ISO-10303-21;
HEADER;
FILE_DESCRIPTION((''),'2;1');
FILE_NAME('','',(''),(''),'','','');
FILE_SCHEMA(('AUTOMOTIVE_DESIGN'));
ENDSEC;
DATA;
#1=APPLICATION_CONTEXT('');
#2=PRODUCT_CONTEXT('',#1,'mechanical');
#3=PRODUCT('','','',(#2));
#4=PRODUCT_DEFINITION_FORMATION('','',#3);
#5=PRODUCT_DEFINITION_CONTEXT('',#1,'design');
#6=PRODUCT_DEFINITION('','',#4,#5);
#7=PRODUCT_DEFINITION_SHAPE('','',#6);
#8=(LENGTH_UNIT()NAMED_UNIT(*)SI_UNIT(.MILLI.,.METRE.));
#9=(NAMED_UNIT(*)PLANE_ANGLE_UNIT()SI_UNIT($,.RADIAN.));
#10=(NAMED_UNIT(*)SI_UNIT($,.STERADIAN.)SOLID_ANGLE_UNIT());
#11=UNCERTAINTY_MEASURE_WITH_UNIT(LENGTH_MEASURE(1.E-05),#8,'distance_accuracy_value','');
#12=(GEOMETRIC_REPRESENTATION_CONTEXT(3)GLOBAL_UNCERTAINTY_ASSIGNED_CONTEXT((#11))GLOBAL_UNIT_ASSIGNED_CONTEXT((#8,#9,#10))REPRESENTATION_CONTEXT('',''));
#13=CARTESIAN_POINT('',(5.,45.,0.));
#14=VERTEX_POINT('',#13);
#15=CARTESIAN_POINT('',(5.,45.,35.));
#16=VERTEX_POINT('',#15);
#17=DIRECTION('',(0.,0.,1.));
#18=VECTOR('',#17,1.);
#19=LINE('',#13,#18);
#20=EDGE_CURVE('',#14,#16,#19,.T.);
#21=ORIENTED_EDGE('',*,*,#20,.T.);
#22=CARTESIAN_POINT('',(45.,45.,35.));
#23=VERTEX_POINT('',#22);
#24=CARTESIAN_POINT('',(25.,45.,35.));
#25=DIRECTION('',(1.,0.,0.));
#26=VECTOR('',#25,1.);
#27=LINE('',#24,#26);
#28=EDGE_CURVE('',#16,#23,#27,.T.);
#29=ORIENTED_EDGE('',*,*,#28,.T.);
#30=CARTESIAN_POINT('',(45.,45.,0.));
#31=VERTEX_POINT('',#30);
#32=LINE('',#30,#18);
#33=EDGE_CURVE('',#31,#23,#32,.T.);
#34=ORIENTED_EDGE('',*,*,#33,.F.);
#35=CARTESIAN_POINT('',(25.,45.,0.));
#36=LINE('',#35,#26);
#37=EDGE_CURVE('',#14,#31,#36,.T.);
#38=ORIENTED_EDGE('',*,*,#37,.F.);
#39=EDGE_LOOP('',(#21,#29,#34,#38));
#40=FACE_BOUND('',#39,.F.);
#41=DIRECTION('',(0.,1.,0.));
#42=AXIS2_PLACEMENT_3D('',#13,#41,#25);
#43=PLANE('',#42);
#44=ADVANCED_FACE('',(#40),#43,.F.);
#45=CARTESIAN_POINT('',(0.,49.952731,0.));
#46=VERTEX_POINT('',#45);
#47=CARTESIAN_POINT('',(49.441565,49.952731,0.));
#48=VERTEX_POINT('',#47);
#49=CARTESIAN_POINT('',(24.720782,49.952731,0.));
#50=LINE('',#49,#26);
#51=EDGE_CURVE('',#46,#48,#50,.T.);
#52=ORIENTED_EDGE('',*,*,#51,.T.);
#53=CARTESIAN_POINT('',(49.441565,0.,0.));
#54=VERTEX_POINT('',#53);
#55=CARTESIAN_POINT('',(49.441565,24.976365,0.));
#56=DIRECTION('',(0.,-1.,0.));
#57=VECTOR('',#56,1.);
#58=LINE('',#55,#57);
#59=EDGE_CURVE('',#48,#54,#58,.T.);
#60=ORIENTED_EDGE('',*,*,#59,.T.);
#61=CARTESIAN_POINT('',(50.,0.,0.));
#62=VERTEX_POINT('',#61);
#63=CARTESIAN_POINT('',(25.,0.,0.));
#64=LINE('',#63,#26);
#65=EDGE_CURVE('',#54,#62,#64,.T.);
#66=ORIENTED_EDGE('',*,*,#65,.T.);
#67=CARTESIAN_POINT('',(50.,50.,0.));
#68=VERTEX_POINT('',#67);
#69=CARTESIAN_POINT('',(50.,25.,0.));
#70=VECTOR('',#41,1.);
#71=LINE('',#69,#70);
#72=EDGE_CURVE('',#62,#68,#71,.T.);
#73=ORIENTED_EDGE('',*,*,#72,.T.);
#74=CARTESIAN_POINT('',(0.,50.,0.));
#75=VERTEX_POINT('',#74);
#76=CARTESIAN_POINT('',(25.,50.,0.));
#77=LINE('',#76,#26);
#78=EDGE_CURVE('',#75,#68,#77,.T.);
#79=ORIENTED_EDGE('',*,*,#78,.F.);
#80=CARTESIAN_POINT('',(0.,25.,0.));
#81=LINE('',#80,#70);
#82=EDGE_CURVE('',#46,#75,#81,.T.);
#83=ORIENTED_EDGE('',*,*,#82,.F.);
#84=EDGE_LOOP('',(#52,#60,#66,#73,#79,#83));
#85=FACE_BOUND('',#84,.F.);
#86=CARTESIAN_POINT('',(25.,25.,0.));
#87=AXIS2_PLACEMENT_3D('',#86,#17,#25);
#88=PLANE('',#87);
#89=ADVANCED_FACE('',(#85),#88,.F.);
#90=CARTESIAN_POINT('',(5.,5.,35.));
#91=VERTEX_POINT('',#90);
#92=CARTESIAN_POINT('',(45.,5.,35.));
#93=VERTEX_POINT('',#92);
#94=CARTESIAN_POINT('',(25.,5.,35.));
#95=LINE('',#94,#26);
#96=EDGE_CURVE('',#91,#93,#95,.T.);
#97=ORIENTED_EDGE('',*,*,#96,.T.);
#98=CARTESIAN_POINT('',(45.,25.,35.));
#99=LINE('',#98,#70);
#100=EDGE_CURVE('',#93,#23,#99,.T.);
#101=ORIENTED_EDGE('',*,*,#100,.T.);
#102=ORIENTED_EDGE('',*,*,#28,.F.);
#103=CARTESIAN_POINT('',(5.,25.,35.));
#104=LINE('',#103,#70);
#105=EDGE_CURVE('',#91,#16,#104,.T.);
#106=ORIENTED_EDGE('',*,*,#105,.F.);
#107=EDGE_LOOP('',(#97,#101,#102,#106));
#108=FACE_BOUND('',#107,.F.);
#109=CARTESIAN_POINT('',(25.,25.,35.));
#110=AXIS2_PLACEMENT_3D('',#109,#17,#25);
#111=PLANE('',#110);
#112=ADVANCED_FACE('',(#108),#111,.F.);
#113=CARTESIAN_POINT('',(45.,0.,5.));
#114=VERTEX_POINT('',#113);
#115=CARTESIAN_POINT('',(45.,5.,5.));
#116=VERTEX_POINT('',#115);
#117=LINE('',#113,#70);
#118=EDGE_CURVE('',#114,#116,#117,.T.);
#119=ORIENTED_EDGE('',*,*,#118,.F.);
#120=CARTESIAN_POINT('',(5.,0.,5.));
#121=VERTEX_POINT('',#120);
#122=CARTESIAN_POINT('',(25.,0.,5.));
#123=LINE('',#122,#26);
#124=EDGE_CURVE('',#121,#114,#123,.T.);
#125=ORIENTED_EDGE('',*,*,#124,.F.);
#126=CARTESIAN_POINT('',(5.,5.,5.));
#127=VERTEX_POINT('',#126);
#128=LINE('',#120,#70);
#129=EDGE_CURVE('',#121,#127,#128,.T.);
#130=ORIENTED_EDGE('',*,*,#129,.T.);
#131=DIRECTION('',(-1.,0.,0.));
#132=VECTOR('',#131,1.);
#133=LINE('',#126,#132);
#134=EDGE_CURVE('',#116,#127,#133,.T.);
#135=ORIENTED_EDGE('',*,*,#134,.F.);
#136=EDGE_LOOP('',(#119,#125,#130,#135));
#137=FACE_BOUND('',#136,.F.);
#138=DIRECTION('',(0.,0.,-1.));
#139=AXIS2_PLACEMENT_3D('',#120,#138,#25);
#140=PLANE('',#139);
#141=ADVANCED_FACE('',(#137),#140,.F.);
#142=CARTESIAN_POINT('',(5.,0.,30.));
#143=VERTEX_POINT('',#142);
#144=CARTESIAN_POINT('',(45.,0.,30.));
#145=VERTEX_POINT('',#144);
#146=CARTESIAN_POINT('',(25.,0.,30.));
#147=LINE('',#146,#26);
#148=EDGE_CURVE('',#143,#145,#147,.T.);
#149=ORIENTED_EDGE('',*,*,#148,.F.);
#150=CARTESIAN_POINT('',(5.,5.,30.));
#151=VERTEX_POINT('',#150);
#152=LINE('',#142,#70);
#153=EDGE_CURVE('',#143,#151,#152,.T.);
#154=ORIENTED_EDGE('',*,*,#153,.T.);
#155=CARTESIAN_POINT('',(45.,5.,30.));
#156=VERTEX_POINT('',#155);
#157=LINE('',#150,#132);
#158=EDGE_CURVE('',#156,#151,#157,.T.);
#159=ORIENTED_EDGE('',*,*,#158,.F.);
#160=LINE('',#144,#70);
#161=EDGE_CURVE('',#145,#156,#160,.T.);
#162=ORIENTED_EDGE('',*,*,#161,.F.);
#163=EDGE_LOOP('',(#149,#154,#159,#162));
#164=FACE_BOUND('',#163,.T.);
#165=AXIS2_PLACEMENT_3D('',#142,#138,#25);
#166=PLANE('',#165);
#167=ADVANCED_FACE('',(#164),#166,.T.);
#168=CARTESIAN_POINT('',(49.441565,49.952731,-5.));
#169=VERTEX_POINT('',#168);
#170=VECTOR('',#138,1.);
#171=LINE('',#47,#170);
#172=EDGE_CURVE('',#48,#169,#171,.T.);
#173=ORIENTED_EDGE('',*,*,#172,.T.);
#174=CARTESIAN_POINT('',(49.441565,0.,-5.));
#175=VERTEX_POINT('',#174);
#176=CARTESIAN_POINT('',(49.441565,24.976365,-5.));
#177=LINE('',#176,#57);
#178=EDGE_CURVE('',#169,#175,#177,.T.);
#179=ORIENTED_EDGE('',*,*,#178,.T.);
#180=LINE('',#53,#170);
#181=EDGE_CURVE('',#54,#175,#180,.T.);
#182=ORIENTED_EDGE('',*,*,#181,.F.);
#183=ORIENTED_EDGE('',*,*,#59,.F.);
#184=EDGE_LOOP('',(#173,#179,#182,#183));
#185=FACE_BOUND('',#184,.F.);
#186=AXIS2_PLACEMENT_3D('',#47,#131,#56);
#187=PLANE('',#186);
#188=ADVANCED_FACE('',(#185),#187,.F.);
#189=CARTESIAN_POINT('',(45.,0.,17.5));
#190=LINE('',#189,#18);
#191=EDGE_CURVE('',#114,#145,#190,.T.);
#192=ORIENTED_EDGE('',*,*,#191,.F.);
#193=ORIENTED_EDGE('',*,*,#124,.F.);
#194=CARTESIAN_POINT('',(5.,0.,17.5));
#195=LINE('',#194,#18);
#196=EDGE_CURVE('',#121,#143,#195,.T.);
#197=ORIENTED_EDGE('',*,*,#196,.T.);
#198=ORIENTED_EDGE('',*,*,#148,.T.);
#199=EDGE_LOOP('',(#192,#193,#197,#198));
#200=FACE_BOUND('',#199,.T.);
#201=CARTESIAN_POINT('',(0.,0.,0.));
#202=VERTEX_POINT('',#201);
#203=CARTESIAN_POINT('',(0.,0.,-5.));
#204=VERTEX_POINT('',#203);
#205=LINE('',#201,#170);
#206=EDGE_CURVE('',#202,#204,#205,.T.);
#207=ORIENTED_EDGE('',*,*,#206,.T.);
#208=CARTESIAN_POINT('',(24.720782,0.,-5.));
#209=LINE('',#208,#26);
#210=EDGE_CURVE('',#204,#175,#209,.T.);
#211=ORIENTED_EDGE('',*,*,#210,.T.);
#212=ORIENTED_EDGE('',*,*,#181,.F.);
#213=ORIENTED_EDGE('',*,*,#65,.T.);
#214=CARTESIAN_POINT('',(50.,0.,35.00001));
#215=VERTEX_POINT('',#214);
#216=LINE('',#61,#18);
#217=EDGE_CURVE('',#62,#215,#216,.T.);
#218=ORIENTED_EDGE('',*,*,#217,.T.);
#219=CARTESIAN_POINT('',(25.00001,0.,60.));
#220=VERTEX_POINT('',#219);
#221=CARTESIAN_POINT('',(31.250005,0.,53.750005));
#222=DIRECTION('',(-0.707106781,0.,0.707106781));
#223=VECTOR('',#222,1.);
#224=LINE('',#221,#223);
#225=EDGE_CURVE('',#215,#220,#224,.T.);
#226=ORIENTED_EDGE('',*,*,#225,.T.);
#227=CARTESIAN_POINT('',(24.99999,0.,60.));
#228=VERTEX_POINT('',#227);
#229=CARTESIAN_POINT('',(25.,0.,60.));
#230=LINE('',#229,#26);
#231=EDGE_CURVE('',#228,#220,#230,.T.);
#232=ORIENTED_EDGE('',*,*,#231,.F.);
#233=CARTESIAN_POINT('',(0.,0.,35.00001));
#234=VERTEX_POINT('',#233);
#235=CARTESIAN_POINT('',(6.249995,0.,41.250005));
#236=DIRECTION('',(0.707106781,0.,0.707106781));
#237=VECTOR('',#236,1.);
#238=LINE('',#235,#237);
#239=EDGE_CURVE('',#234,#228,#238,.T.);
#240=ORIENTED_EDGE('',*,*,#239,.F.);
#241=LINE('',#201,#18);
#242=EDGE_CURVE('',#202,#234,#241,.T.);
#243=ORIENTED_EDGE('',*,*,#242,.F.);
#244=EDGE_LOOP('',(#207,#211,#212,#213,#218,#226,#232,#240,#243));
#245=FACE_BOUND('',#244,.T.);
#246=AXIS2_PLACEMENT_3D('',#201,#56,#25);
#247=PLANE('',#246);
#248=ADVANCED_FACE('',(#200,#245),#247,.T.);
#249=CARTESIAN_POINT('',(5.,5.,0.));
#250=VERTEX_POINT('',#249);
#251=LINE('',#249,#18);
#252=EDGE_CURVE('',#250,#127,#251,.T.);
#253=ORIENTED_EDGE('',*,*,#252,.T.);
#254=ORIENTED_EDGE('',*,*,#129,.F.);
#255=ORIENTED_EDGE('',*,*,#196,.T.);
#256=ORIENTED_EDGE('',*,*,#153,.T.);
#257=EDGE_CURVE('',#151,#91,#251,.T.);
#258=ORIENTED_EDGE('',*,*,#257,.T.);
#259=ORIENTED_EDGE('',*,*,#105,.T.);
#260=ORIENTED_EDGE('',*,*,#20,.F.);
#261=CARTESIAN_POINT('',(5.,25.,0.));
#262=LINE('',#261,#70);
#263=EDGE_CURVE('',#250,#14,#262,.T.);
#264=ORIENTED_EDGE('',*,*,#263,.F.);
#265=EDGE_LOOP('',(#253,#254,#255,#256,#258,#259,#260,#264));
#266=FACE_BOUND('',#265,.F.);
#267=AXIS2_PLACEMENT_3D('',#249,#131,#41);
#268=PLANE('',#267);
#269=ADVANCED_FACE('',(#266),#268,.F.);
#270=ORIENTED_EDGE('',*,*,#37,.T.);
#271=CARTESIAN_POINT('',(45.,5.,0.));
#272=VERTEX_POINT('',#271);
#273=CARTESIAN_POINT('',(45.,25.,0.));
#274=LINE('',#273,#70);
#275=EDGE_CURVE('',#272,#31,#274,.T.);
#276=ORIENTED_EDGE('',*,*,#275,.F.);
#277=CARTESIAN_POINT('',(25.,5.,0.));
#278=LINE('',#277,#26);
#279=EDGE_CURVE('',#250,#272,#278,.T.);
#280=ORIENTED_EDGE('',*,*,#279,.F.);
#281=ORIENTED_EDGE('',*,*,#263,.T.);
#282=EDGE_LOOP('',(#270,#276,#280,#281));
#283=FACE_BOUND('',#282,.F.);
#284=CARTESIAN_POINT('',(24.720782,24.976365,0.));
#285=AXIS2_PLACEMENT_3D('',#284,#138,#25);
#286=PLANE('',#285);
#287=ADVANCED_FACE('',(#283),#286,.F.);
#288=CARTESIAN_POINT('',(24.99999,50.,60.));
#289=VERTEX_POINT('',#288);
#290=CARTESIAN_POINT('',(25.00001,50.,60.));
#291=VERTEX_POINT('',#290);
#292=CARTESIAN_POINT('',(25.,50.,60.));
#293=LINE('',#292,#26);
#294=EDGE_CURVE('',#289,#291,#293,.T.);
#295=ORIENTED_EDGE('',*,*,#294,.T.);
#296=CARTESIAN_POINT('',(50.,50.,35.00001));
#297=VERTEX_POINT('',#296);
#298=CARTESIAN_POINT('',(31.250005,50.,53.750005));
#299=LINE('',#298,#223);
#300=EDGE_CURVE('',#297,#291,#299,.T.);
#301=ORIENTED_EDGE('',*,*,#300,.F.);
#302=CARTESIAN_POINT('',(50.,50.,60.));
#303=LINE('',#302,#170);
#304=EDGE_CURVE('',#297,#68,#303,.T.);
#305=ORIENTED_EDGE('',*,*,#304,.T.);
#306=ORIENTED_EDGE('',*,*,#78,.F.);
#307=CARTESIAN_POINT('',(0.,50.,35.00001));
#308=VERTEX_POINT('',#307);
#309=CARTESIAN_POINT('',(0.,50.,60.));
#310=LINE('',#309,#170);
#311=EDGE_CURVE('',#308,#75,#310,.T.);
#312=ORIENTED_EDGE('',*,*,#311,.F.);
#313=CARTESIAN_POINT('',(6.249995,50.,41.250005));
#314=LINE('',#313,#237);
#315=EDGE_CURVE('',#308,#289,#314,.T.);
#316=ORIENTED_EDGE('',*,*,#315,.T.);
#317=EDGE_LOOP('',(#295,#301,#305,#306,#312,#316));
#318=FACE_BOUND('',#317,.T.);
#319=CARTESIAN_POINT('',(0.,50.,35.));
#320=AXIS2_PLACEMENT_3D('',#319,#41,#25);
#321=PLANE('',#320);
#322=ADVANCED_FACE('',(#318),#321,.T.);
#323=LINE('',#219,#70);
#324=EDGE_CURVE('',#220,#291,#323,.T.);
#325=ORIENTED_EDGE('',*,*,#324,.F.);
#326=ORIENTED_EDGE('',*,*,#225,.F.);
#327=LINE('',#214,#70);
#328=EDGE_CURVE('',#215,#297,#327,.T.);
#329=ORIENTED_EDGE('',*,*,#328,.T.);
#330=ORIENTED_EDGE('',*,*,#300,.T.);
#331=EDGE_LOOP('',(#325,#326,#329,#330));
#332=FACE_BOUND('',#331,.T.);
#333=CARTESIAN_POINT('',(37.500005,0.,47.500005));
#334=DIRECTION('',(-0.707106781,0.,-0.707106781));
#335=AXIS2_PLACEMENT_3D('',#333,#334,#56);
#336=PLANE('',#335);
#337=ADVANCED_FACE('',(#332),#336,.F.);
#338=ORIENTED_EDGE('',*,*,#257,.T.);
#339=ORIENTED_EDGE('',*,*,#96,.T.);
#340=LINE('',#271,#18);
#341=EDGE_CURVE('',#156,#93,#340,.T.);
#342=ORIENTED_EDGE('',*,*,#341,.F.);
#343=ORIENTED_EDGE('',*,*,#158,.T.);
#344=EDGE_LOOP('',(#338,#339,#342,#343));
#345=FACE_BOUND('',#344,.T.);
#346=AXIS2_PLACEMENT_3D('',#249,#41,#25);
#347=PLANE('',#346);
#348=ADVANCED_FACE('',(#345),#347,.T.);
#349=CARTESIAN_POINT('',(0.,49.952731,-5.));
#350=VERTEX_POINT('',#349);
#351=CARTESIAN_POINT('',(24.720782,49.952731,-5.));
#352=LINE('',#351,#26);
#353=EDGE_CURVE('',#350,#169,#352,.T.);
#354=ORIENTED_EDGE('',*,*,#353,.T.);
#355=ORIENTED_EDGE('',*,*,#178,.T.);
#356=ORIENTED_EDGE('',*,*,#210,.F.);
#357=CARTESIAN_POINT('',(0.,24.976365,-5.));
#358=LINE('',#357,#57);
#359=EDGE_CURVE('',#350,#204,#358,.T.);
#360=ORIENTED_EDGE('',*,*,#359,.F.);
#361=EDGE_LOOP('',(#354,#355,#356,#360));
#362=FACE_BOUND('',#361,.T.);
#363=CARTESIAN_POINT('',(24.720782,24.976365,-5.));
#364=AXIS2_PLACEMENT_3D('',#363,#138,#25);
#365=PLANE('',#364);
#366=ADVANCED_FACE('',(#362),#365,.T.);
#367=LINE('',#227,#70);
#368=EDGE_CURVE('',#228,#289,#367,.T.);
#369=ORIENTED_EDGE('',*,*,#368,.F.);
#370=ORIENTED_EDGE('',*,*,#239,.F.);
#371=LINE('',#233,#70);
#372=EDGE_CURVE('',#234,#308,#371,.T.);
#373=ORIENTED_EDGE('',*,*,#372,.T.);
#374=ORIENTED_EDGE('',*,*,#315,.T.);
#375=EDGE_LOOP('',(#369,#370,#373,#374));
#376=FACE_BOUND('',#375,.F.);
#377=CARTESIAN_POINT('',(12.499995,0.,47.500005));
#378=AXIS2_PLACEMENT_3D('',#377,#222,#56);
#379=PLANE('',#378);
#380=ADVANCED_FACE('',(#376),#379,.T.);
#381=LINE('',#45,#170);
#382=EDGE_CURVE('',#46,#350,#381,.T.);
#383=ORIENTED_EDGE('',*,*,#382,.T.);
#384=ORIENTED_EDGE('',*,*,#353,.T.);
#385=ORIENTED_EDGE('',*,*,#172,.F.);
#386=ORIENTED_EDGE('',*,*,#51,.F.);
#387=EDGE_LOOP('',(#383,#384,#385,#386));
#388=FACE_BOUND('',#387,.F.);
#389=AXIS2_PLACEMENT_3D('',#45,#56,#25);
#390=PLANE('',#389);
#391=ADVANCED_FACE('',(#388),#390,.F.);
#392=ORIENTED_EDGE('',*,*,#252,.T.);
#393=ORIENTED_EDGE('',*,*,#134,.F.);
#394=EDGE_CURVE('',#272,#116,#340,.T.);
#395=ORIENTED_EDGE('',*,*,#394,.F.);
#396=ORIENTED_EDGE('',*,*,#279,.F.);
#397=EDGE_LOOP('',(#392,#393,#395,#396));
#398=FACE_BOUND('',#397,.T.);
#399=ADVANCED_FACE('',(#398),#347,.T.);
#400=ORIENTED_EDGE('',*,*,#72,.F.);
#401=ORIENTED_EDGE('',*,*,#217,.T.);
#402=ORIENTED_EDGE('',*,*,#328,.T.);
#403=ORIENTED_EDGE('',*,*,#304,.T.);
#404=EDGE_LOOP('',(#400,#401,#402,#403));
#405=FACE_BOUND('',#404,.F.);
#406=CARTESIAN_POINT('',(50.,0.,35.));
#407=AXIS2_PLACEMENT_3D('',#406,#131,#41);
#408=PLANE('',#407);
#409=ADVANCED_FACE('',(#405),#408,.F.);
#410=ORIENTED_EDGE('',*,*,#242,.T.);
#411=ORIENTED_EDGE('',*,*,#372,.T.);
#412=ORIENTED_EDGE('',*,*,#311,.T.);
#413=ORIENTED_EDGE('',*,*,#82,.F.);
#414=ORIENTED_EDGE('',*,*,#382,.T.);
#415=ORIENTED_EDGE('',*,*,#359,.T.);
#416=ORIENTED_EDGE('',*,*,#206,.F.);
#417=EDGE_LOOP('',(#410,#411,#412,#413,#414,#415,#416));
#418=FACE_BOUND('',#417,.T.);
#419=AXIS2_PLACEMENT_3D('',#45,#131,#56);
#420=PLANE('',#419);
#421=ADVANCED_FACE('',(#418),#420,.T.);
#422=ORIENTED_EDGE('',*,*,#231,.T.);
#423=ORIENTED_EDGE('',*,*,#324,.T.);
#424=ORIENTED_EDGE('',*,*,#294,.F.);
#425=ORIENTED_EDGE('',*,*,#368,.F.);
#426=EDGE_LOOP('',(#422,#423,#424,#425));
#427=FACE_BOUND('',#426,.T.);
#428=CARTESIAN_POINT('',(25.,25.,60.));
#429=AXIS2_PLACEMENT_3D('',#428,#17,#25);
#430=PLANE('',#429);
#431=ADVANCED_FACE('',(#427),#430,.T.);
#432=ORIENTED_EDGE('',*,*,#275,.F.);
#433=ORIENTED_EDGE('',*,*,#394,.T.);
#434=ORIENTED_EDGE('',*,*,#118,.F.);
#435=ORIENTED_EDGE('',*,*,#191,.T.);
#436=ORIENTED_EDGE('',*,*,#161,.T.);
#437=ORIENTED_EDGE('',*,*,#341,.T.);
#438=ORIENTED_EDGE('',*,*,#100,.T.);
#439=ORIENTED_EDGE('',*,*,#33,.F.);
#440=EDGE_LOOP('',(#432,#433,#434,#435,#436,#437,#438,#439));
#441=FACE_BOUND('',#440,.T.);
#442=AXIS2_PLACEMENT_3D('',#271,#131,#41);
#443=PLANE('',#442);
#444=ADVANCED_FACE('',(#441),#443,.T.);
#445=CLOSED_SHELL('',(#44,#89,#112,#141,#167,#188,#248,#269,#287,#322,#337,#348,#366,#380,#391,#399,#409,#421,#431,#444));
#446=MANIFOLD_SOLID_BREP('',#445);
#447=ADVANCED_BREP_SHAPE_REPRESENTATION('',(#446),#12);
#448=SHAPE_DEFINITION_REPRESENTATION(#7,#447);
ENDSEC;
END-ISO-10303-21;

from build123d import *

# Parameters (mm, degrees)
F0_W     = 50
F0_H     = 50
F0_W_2   = 40
F0_H_2   = 40
F1_DEPTH = 35
F2_W     = 50
F2_H     = 50
F3_DEPTH = 25
F4_SIZE  = 24.99999
F5_W     = 40
F5_H     = 25
F6_DEPTH = 35
F8_W     = 49.4415648282
F8_H     = 49.9527305365
F9_DEPTH = 5


# Not quite as in the source:
# - a fillet or chamfer is up to 0.001 mm smaller than in the source, because OpenCascade refuses the exact size


with BuildPart() as f1:
    # F0 (on Top) → F1 (new body)
    with BuildSketch(Plane.XY):
        with Locations((25, 25)):
            Rectangle(F0_W, F0_H)
        with Locations((25, 25)):
            Rectangle(F0_W_2, F0_H_2, mode=Mode.SUBTRACT)
    extrude(amount=F1_DEPTH)

    # F2 (on face) → F3 (join)
    with BuildSketch(Plane.XY.offset(35)):
        with Locations((25, 25)):
            Rectangle(F2_W, F2_H)
    extrude(amount=F3_DEPTH)

    # F4 (size 25 in the source; OpenCascade refuses exactly that, so slightly less here)
    f4_edges = [f1.edges().sort_by_distance(p)[0] for p in [
        (0, 25, 60),
        (50, 25, 60),
    ]]
    chamfer(f4_edges, length=F4_SIZE)

    # F5 (on face) → F6 (cut)
    with BuildSketch(Plane.XZ):
        with Locations((25, 17.5)):
            Rectangle(F5_W, F5_H)
    extrude(amount=-F6_DEPTH, mode=Mode.SUBTRACT)

    # F8 (on face) → F9 (join)
    with BuildSketch(Plane(origin=(0, 0, 0), x_dir=(1, 0, 0), z_dir=(0, 0, -1))):
        with Locations((24.7207824141, -24.9763652682)):
            Rectangle(F8_W, F8_H)
    extrude(amount=F9_DEPTH)


solid = f1.part
